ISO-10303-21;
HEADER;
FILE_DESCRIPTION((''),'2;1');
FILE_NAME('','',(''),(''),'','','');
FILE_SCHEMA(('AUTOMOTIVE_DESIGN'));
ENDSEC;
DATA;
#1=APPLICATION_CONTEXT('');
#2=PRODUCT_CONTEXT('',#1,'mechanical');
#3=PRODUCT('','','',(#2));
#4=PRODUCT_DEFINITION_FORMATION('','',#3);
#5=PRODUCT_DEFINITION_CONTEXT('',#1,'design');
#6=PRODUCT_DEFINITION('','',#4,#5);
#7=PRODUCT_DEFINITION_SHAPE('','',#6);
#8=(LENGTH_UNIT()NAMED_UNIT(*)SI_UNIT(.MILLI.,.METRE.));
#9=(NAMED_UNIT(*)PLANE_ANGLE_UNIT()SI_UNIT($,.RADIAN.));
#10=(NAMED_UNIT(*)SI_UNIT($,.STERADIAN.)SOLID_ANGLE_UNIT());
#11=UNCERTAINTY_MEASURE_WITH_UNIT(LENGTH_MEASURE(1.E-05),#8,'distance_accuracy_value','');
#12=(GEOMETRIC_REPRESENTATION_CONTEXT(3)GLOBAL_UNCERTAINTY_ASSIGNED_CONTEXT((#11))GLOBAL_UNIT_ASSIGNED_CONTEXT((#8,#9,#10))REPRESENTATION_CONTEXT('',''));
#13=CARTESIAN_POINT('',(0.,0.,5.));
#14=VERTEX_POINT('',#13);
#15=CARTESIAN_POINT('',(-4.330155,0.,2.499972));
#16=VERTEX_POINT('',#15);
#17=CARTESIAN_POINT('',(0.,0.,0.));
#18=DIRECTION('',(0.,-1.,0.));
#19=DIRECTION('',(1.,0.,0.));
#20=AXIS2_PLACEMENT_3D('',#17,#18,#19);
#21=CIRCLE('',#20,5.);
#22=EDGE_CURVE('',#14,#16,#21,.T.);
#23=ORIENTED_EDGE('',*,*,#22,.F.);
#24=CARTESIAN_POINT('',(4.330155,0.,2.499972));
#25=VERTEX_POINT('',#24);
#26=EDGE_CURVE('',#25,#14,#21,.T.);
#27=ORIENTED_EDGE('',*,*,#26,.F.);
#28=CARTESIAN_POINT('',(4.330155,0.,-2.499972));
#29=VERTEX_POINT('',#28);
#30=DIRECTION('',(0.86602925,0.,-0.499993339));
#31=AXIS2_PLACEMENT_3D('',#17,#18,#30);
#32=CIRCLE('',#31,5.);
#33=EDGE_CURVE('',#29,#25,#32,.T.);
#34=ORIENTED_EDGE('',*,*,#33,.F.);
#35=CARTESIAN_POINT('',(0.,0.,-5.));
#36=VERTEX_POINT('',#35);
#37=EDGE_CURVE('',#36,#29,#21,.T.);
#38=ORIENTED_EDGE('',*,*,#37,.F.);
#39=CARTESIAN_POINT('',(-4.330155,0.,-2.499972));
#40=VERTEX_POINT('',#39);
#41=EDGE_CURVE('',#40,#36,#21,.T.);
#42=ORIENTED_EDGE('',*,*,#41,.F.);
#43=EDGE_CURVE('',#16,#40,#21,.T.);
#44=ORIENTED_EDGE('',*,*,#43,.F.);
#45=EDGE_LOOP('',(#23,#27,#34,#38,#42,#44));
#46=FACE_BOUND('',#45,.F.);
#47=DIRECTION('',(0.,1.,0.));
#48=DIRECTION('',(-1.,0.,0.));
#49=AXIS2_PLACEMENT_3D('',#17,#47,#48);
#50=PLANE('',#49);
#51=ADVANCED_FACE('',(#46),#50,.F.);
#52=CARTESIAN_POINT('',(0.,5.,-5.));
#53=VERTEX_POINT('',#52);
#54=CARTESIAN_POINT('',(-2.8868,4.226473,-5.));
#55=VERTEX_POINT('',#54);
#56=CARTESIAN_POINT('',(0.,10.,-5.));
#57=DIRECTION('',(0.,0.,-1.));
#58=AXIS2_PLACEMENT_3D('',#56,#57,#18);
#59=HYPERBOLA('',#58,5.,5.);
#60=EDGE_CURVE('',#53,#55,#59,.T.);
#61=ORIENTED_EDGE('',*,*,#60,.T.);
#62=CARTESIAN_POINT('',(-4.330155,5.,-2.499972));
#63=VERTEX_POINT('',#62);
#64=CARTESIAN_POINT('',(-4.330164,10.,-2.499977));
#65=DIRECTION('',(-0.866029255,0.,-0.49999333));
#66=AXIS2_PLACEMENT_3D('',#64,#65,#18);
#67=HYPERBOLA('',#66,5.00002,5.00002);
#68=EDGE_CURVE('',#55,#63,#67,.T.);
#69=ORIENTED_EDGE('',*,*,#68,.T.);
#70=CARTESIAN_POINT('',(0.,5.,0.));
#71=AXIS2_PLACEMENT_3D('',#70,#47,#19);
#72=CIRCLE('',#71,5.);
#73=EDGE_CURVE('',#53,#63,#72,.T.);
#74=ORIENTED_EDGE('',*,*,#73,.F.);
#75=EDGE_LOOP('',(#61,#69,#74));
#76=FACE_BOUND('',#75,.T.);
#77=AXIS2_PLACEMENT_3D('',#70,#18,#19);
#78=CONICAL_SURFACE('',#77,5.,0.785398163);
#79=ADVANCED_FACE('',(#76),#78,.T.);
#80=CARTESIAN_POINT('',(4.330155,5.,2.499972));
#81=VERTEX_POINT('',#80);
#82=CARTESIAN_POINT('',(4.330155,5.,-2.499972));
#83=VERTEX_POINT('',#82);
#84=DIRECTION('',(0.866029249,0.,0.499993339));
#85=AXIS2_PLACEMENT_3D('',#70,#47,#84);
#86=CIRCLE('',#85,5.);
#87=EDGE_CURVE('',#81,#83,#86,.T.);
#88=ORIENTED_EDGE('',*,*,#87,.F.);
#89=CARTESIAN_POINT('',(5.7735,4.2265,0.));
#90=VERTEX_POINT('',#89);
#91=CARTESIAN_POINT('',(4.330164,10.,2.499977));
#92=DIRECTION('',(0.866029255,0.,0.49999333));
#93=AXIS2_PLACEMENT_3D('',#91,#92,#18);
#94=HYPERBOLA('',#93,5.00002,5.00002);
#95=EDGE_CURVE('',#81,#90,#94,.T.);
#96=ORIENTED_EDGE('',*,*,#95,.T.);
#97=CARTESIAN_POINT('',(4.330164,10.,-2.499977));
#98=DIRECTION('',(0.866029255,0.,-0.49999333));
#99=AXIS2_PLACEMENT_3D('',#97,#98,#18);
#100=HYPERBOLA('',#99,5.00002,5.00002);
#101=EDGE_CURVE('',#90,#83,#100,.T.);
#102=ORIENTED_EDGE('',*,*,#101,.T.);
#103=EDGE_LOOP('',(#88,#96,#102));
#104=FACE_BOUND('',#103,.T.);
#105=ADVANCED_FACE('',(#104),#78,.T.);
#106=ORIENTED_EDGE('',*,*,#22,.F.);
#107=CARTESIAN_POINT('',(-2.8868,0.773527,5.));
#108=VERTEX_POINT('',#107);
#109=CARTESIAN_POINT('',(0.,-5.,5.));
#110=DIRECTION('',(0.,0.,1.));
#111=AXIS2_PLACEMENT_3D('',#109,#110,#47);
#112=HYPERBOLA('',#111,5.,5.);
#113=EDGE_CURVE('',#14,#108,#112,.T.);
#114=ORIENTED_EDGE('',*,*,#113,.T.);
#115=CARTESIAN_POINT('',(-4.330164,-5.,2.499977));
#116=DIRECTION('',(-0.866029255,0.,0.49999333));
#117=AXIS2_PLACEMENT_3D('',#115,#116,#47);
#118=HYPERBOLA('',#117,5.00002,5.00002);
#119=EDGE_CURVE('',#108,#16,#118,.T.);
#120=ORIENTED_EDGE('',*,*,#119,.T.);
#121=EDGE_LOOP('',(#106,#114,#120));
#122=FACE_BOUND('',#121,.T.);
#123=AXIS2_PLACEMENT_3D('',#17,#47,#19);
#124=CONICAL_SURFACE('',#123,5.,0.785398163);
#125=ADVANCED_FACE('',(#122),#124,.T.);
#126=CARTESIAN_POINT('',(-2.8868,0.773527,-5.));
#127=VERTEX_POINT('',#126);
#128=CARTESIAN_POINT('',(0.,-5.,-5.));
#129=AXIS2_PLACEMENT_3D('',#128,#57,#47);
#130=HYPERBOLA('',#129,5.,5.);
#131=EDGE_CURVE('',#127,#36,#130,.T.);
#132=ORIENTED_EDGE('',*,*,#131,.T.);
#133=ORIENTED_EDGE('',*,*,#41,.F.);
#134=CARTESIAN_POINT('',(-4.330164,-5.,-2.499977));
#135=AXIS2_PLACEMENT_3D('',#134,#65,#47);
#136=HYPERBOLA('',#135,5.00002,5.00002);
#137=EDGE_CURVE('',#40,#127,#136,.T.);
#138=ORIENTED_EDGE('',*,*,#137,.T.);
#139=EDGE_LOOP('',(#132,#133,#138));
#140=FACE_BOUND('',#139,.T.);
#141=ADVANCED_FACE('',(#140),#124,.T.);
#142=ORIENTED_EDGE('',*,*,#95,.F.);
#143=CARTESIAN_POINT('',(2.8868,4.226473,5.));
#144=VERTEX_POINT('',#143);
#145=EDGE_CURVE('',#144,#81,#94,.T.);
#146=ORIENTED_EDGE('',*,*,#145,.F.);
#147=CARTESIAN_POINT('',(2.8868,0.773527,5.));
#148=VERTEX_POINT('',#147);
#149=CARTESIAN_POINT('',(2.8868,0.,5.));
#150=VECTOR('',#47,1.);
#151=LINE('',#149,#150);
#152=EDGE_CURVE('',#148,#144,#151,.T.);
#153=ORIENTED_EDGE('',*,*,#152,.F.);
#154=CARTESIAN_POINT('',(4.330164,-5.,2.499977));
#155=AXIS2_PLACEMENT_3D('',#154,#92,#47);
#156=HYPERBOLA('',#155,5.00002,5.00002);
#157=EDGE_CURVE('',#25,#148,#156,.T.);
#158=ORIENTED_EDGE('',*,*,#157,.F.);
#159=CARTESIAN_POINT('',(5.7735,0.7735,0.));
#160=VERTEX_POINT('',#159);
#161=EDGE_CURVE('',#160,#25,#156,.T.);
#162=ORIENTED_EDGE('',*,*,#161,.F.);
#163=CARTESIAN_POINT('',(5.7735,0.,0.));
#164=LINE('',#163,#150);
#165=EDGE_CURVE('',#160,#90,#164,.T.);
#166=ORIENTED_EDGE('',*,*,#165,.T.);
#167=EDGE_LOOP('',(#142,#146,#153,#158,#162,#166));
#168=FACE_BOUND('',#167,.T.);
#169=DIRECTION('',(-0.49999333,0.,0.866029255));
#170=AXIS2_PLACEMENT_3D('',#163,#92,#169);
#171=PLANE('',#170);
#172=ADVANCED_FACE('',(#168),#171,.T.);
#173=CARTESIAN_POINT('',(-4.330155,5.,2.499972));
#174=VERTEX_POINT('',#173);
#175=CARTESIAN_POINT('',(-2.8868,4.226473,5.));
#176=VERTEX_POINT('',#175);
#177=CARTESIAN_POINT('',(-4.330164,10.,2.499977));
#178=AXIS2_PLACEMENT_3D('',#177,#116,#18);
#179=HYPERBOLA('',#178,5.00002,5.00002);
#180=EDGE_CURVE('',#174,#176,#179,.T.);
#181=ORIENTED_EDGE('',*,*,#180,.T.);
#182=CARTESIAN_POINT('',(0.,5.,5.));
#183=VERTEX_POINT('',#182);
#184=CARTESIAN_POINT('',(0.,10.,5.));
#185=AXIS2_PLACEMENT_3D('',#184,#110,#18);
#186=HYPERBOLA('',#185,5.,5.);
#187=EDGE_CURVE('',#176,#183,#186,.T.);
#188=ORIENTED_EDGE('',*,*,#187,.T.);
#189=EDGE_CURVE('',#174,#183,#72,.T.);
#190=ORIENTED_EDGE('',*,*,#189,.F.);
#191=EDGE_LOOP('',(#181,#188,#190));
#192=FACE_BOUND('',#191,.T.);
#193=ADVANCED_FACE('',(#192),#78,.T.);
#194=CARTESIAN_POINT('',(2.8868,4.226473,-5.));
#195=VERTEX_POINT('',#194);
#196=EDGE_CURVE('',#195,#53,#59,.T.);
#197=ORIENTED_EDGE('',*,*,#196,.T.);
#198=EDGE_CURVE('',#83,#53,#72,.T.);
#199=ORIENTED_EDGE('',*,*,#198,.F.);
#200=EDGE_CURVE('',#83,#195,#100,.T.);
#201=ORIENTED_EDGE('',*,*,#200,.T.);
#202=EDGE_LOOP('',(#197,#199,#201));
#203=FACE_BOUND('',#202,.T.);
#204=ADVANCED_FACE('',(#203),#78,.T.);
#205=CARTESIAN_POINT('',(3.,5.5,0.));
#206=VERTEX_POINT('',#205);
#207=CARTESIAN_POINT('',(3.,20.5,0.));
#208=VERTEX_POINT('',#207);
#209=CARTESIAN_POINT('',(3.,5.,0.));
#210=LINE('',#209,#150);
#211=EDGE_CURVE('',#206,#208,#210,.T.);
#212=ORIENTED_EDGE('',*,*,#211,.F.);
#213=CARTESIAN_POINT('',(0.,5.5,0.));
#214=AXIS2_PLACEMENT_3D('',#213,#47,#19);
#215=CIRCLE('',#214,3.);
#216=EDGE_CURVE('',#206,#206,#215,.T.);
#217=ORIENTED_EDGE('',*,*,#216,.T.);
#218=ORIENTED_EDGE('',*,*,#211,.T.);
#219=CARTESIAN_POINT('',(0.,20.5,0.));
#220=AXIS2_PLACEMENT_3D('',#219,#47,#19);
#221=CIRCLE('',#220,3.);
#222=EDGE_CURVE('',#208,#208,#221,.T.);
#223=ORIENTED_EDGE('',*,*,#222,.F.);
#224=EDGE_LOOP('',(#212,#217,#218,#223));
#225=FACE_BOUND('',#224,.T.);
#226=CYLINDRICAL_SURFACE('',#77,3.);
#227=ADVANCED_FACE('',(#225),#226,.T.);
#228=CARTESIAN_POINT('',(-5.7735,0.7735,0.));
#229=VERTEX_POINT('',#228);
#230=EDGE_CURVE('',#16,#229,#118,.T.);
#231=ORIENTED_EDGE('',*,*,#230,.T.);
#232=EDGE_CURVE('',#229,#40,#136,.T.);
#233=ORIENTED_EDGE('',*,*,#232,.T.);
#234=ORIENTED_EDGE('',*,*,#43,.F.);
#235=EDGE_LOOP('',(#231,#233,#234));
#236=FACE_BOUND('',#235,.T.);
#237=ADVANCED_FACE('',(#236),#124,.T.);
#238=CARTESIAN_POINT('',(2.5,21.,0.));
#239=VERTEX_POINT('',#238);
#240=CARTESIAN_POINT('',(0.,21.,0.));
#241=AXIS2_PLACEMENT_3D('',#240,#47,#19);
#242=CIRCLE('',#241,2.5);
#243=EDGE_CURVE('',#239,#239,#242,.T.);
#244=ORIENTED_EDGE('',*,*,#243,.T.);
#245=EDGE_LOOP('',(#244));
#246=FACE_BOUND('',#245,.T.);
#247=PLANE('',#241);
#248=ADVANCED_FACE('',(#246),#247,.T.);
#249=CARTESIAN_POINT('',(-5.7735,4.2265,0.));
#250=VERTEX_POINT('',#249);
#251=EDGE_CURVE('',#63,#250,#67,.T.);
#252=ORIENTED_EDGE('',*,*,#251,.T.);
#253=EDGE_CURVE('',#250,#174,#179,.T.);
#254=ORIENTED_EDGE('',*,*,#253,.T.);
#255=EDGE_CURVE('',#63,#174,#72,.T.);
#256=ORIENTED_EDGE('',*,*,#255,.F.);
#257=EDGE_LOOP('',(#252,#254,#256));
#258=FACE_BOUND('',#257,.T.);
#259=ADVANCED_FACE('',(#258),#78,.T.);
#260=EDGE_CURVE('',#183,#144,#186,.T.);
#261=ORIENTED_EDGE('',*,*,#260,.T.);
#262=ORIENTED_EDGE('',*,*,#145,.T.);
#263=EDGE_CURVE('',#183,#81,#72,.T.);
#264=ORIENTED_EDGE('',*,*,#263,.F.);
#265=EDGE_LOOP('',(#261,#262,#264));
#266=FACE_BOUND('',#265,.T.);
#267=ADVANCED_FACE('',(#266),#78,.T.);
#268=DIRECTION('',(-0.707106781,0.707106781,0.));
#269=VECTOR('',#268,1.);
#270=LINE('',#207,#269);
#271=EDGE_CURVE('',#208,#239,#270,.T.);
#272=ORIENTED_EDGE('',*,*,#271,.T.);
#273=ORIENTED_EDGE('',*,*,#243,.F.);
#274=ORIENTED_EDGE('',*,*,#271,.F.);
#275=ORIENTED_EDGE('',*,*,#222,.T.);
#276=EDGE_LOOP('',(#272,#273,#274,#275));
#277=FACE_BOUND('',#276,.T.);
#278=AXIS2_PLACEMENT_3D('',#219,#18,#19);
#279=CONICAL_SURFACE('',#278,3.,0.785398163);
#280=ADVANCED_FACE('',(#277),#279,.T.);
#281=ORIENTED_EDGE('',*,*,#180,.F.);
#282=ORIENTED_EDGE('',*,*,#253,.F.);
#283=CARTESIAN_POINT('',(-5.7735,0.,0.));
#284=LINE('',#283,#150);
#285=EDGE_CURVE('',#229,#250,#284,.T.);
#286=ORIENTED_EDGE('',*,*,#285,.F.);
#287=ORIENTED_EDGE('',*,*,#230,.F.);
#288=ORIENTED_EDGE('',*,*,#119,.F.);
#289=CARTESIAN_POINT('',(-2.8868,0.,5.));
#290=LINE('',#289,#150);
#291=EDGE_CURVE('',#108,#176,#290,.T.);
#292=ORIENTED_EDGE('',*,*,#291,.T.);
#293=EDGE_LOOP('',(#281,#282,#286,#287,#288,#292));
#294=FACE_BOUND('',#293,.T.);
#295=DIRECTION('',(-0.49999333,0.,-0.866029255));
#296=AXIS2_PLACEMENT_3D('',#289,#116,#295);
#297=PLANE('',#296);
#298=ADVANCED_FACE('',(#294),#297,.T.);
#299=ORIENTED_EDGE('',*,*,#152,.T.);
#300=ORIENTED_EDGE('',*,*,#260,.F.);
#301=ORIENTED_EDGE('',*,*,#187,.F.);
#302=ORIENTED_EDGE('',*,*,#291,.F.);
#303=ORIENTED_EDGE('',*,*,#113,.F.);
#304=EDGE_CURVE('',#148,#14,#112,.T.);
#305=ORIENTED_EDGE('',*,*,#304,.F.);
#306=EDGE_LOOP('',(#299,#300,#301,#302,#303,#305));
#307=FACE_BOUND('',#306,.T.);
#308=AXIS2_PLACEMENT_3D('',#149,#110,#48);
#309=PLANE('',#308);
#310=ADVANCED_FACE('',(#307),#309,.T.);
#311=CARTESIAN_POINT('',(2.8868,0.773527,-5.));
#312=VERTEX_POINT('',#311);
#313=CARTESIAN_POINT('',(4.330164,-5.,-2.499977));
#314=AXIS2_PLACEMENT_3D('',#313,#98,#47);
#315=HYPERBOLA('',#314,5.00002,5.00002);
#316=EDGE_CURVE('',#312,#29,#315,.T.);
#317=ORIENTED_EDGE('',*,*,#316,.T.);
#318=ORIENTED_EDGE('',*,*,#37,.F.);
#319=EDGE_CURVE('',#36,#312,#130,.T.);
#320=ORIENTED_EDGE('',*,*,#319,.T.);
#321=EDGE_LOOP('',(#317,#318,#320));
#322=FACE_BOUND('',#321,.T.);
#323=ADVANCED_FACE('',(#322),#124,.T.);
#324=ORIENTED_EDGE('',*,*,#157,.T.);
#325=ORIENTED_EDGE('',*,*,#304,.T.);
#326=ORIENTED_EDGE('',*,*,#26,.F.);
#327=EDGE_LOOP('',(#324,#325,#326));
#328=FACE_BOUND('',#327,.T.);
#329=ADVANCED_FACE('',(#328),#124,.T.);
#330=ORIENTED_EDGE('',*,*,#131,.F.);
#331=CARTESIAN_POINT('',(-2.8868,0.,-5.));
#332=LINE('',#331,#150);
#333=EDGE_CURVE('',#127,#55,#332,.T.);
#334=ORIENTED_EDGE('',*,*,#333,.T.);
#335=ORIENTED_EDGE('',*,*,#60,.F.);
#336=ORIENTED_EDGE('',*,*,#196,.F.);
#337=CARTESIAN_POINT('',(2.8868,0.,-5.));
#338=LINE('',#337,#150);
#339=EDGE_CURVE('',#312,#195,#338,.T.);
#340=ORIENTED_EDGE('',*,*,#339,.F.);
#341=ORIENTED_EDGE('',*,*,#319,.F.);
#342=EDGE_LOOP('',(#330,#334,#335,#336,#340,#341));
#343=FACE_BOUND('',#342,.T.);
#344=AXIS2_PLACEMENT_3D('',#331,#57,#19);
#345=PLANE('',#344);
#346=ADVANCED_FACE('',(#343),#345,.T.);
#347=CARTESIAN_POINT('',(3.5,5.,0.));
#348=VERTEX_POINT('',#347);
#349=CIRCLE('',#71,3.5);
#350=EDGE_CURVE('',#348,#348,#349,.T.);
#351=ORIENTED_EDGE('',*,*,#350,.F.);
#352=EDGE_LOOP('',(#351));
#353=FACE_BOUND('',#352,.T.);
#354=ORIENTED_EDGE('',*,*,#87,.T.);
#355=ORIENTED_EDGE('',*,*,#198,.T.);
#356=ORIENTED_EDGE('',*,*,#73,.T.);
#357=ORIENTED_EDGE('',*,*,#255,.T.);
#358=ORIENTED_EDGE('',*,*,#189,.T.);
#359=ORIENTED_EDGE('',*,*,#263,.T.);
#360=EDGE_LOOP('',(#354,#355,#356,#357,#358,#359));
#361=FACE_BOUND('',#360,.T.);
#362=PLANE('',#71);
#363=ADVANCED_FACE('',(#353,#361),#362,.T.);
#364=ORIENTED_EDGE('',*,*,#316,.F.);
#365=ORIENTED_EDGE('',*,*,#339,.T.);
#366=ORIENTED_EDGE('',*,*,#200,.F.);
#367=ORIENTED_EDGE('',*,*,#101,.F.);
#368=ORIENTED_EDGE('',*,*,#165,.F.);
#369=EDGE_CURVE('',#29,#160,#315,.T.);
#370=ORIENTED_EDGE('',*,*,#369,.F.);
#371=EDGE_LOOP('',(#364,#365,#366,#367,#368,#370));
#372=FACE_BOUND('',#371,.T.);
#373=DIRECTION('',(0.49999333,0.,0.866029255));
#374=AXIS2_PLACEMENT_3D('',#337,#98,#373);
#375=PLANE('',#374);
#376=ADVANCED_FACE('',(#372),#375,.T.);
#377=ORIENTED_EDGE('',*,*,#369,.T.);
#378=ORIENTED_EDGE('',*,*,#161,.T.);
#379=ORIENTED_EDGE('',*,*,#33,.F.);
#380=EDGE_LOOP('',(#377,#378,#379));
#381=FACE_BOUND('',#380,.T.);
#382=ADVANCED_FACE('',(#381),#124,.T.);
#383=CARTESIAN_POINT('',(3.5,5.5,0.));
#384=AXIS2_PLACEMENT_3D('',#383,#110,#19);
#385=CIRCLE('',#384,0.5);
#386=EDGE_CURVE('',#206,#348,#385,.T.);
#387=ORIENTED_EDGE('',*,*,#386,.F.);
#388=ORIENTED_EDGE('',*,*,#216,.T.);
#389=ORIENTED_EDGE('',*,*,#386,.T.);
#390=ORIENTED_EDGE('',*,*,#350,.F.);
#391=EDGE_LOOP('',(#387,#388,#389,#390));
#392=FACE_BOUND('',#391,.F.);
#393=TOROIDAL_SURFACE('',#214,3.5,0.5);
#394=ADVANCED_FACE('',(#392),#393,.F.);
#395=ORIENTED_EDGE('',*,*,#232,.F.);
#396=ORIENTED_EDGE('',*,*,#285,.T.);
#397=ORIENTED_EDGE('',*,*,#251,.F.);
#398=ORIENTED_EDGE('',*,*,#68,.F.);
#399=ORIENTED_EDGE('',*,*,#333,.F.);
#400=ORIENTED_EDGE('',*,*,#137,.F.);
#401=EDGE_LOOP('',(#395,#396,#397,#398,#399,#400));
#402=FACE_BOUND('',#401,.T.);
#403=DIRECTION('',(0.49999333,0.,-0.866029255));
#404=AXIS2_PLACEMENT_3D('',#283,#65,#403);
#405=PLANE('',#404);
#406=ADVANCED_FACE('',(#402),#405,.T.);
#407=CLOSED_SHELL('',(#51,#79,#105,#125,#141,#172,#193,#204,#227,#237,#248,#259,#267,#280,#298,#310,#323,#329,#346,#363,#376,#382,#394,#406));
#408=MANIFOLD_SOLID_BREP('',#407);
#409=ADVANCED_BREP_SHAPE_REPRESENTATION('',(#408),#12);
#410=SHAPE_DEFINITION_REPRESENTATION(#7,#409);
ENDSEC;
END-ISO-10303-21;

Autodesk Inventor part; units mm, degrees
ref_plane "YZ Plane" through (0, 0, 0) normal (1, 0, 0) x (0, 1, 0)
ref_plane "XZ Plane" through (0, 0, 0) normal (0, 1, 0) x (-1, 0, 0)
ref_plane "XY Plane" through (0, 0, 0) normal (0, 0, 1) x (1, 0, 0)
sketch "Esboço1" plane through (0, 0, 0) normal (0, 1, 0) x (-1, 0, 0)
  circle A0 centre (0, 0) radius 3
  line L0 (-2.8868, -5) -> (-5.7735, 0)
  line L1 (-5.7735, 0) -> (-2.8868, 5)
  line L2 (-2.8868, 5) -> (2.8868, 5)
  line L3 (2.8868, 5) -> (5.7735, 0)
  line L4 (5.7735, 0) -> (2.8868, -5)
  line L5 (2.8868, -5) -> (-2.8868, -5)
  dimension "d0" = 6
extrude "Extrusão1" add sketch "Esboço1" along normal blind 5
sketch "Esboço2" plane through (0, 0, 0) normal (1, 0, 0) x (0, 1, 0)
  point P0 (0, 0)
chamfer "Chanfro1" distance 0.5 angle 45 2 edges at (3, 0, 0) (3, 5, 0)
sketch "Esboço5" plane through (0, 0, 0) normal (0, -1, 0) x (1, 0, 0)
  circle A0 centre (0, 0) radius 5
extrude "Extrusão2" cut sketch "Esboço5" against normal through all draft 45 keep common part
sketch "Esboço6" plane through (0, 5, 0) normal (0, 1, 0) x (1, 0, 0)
  circle A0 centre (0, 0) radius 5
extrude "Extrusão3" cut sketch "Esboço6" against normal through all draft 45 keep common part
sketch "Esboço7" plane through (0, 5, 0) normal (0, 1, 0) x (1, 0, 0)
  circle A0 centre (0, 0) radius 3.5
extrude "Extrusão4" add sketch "Esboço7" against normal blind 5
sketch "Esboço8" plane through (0, 5, 0) normal (0, 1, 0) x (1, 0, 0)
  circle A0 centre (0, 0) radius 3
  dimension "d16" = 6
extrude "Extrusão5" add sketch "Esboço8" along normal blind 16
chamfer "Chanfro2" distance 0.5 angle 45 1 edges at (-3, 21, 0)
fillet "Arredondamento1" radius 0.5 1 edges at (-3, 5, 0)
thread "Rosca2" size "M6x1" class "6g" standard "ANSI Metric M Profile" full length
properties part number "porca m6" material "Aço inoxidável"
